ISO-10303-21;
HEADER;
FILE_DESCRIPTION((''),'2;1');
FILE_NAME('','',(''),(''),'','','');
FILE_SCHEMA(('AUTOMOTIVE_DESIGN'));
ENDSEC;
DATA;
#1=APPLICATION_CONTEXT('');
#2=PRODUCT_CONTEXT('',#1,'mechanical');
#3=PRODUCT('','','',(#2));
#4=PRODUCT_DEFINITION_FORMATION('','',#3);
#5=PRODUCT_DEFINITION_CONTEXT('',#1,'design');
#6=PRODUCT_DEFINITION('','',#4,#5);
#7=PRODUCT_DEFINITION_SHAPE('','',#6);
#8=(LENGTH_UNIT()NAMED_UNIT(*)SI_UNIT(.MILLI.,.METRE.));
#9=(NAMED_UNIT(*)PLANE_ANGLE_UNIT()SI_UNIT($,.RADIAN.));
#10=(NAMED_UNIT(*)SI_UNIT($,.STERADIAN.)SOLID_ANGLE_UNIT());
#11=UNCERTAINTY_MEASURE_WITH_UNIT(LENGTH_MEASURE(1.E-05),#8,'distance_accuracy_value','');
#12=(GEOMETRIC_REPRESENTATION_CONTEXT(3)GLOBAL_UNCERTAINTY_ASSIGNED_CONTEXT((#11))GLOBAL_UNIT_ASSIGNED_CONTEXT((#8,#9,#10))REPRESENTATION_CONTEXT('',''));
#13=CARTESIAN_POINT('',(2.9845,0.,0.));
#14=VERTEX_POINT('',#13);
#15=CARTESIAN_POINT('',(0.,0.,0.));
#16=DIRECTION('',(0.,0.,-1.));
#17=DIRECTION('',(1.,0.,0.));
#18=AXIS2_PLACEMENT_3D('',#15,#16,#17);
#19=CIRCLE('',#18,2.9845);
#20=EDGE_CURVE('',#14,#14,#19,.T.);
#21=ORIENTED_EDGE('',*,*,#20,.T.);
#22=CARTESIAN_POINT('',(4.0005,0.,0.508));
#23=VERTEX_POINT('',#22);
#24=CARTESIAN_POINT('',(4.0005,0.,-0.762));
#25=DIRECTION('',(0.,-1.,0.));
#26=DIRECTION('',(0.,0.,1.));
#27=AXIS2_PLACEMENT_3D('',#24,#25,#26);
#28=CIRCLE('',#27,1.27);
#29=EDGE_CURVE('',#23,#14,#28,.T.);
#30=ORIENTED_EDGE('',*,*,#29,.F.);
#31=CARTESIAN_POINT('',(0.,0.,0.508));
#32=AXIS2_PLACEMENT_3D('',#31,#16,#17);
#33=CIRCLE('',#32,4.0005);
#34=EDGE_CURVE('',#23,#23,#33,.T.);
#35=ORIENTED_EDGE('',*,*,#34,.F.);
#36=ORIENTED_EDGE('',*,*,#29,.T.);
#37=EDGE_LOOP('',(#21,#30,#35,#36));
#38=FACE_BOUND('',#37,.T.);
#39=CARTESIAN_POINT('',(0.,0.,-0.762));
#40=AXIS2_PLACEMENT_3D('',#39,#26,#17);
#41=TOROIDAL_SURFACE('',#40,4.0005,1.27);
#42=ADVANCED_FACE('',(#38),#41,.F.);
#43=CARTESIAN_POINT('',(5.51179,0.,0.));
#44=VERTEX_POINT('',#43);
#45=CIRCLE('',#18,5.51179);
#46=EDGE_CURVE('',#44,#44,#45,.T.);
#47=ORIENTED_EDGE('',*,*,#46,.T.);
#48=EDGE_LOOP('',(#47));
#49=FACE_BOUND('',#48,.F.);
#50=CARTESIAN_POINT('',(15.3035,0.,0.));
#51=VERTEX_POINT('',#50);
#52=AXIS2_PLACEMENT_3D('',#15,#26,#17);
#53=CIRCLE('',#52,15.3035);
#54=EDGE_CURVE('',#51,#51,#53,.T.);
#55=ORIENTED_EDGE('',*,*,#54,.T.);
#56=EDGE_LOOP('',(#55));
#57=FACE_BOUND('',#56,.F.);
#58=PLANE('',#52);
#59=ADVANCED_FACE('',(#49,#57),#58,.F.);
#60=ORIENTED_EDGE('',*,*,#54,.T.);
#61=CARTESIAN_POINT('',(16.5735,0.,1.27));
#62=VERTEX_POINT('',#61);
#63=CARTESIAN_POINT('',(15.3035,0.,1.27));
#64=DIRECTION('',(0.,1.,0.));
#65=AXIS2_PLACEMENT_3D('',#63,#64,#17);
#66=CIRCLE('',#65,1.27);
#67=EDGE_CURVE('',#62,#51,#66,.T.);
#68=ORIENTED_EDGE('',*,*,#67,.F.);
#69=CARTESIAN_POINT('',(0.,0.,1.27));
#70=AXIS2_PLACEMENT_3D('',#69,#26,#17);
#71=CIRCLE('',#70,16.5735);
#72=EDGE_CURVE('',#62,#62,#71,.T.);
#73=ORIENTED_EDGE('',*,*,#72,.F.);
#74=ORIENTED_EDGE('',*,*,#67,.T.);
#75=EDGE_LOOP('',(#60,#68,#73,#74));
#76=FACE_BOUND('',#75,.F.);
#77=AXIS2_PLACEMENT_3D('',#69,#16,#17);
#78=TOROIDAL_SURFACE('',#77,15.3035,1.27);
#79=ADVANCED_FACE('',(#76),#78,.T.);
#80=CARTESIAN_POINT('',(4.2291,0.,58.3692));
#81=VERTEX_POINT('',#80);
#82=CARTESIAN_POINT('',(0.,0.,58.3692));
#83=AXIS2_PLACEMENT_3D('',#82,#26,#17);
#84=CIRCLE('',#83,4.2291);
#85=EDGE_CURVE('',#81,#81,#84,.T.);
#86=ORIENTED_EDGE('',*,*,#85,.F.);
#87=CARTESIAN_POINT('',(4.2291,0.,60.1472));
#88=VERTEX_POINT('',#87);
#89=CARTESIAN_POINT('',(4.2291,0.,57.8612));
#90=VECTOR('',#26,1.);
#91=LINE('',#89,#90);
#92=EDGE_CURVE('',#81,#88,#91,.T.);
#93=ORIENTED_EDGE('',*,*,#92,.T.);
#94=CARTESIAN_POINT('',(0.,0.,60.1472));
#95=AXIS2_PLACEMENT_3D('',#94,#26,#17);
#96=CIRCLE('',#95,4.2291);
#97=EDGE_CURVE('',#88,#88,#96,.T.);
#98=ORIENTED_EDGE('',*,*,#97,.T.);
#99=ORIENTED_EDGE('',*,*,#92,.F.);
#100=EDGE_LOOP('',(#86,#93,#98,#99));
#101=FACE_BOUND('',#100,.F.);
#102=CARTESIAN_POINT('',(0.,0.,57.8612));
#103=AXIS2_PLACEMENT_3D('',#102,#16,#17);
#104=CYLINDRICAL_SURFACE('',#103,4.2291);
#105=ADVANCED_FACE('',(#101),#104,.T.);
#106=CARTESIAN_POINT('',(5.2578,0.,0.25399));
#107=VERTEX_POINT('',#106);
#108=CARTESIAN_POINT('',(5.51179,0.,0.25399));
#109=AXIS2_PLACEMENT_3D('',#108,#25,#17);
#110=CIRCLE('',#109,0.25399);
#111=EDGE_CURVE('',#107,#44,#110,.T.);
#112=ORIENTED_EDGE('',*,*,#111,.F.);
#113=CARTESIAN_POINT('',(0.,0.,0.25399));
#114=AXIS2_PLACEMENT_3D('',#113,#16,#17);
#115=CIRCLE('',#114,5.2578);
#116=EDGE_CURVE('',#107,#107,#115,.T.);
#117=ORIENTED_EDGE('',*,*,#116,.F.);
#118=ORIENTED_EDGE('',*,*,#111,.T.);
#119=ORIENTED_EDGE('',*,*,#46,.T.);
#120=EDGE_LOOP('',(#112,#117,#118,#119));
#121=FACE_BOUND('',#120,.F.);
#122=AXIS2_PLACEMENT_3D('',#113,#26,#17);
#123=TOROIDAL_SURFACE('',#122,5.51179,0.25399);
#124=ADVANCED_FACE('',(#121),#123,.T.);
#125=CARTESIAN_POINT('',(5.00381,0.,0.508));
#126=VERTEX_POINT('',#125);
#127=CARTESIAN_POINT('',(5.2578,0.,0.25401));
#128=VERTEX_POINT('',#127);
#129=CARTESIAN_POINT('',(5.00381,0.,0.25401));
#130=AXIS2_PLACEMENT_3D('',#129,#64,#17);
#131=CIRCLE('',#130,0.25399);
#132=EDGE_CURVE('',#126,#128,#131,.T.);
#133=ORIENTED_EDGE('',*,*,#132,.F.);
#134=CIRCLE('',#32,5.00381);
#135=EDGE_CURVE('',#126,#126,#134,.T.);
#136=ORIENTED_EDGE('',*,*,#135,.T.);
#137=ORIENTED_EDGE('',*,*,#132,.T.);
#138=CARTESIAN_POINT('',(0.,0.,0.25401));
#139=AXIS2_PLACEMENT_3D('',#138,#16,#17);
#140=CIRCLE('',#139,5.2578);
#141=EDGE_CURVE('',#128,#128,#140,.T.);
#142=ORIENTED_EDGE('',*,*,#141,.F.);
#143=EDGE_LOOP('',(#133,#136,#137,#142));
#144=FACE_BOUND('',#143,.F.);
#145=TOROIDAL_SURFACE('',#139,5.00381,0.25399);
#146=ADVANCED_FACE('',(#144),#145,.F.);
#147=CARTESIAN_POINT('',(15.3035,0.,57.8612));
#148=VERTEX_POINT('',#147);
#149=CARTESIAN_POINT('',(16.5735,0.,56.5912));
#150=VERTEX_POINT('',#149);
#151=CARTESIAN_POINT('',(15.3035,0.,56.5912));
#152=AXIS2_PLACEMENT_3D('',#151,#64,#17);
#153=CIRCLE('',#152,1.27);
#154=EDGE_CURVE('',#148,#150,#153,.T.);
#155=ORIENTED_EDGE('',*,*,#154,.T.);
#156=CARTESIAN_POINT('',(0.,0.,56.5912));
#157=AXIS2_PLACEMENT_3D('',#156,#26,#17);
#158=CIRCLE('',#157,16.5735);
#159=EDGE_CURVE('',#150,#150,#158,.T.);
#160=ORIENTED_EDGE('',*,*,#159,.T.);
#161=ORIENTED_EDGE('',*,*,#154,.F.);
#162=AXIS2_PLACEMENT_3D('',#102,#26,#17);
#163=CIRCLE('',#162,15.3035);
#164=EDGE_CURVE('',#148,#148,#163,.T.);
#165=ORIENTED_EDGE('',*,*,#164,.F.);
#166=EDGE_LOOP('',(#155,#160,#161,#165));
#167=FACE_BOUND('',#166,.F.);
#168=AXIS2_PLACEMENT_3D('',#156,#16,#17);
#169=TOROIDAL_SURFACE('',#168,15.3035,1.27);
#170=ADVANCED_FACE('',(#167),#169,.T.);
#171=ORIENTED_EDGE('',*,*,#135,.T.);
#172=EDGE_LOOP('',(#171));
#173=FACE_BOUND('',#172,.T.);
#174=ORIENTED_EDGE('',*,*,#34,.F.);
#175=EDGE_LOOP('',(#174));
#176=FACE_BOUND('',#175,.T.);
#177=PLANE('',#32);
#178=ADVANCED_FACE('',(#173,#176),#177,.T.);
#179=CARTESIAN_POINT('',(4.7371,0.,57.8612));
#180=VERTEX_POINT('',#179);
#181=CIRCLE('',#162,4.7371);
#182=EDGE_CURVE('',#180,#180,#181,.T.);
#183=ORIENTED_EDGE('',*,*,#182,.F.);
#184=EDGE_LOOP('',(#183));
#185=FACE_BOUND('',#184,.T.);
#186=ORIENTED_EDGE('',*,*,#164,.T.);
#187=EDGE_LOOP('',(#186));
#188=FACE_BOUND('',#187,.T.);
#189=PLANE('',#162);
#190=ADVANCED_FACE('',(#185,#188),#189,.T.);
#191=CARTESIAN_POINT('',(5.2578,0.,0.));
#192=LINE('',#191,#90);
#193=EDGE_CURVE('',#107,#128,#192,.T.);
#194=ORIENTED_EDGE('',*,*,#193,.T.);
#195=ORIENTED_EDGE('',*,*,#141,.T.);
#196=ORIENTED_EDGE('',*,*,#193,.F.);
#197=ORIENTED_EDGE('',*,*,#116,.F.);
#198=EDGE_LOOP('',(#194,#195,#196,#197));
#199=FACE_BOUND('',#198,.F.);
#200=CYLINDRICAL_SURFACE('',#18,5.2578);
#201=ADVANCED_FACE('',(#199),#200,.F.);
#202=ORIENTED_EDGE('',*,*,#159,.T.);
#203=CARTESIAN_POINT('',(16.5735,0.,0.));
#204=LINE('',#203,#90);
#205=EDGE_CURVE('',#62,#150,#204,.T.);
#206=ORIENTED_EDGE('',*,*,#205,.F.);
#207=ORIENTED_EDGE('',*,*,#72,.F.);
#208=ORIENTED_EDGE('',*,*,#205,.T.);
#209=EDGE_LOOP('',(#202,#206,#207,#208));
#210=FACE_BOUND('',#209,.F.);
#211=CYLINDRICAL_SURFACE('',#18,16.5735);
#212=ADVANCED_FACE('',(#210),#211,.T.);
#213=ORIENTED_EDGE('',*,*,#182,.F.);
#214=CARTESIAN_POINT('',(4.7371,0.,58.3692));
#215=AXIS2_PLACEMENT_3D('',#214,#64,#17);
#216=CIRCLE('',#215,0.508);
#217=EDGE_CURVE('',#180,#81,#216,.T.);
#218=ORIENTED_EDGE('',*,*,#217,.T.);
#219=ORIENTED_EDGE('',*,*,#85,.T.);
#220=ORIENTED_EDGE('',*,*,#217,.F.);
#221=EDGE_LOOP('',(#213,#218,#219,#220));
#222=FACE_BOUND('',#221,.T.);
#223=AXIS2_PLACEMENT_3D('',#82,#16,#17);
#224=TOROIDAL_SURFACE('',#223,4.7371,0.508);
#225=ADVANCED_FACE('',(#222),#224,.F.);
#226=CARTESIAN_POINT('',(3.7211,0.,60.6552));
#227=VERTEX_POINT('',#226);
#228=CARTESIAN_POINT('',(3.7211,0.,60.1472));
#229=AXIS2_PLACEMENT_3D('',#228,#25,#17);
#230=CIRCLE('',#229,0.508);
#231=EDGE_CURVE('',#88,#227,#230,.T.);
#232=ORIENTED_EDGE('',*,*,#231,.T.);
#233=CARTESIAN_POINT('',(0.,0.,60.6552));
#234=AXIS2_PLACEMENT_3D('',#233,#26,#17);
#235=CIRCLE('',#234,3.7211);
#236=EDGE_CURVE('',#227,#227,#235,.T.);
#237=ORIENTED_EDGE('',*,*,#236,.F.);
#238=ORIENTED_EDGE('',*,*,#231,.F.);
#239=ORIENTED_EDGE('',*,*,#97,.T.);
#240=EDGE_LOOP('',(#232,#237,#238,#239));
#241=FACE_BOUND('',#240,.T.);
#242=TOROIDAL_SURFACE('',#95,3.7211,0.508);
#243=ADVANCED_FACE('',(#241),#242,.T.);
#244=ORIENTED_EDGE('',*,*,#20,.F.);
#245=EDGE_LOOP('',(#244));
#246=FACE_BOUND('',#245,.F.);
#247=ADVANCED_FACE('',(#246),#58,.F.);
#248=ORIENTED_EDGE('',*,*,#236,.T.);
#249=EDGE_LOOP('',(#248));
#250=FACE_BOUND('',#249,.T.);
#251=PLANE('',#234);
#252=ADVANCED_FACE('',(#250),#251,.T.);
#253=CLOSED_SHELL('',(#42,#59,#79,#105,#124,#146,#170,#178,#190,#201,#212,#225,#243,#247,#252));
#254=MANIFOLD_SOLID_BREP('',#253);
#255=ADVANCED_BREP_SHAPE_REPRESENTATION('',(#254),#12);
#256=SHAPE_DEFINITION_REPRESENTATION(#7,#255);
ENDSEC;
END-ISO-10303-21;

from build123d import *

# Parameters (mm, degrees)
F0_R     = 16.5735
F1_DEPTH = 57.8612
F2_R     = 4.2291
F3_DEPTH = 2.794
F4_R     = 0.508
F5_R     = 1.27
F6_R     = 5.2578
F6_R_2   = 2.9845
F7_DEPTH = 0.508
F9_R     = 0.25399


# Not quite as in the source:
# - a fillet or chamfer that OpenCascade refuses, or shapes differently, is made with other operations: its cross-section is extruded or revolved along the edge and cut away or added
# - a fillet or chamfer is up to 0.001 mm smaller than in the source, because OpenCascade refuses the exact size


with BuildPart() as f1:
    # F0 (on Top) → F1 (new body)
    with BuildSketch(Plane.XY):
        Circle(F0_R)
    extrude(amount=F1_DEPTH)

    # F2 (on face) → F3 (join)
    with BuildSketch(Plane.XY.offset(57.8612)):
        Circle(F2_R)
    extrude(amount=F3_DEPTH)

    # F4
    f4_edges = [f1.edges().sort_by_distance(p)[0] for p in [
        (-4.2291, 0, 60.6552),
        (-4.2291, 0, 57.8612),
    ]]
    fillet(f4_edges, radius=F4_R)

    # F5
    f5_edges = [f1.edges().sort_by_distance(p)[0] for p in [
        (-16.5735, 0, 57.8612),
        (-16.5735, 0, 0),
    ]]
    fillet(f5_edges, radius=F5_R)

    # F6 (on face) → F7 (cut)
    with BuildSketch(Plane(origin=(0, 0, 0), x_dir=(1, 0, 0), z_dir=(0, 0, -1))):
        Circle(F6_R)
        Circle(F6_R_2, mode=Mode.SUBTRACT)
    extrude(amount=-F7_DEPTH, mode=Mode.SUBTRACT)

    # F8: fillet of radius 1.27 on 1 edges, made by hand

    # F8_s1 → F8_t2 (revolve)
    with BuildSketch(Plane.XZ):
        with BuildLine():
            ThreePointArc((4.0005, 0.508), (3.4325387337, 0.3739225326), (2.9845, 0))
            Line((2.9845, 0), (2.9845, 0.508))
            Line((2.9845, 0.508), (4.0005, 0.508))
        make_face()
    revolve(axis=Axis((0, 0, 0.508), (0, 0, -1)))

    # F9 (radius 0.254 in the source; OpenCascade refuses exactly that, so slightly less here)
    f9_edges = [f1.edges().sort_by_distance(p)[0] for p in [
        (-5.2578, 0, 0.508),
        (-5.2578, 0, 0),
    ]]
    fillet(f9_edges, radius=F9_R)


solid = f1.part
